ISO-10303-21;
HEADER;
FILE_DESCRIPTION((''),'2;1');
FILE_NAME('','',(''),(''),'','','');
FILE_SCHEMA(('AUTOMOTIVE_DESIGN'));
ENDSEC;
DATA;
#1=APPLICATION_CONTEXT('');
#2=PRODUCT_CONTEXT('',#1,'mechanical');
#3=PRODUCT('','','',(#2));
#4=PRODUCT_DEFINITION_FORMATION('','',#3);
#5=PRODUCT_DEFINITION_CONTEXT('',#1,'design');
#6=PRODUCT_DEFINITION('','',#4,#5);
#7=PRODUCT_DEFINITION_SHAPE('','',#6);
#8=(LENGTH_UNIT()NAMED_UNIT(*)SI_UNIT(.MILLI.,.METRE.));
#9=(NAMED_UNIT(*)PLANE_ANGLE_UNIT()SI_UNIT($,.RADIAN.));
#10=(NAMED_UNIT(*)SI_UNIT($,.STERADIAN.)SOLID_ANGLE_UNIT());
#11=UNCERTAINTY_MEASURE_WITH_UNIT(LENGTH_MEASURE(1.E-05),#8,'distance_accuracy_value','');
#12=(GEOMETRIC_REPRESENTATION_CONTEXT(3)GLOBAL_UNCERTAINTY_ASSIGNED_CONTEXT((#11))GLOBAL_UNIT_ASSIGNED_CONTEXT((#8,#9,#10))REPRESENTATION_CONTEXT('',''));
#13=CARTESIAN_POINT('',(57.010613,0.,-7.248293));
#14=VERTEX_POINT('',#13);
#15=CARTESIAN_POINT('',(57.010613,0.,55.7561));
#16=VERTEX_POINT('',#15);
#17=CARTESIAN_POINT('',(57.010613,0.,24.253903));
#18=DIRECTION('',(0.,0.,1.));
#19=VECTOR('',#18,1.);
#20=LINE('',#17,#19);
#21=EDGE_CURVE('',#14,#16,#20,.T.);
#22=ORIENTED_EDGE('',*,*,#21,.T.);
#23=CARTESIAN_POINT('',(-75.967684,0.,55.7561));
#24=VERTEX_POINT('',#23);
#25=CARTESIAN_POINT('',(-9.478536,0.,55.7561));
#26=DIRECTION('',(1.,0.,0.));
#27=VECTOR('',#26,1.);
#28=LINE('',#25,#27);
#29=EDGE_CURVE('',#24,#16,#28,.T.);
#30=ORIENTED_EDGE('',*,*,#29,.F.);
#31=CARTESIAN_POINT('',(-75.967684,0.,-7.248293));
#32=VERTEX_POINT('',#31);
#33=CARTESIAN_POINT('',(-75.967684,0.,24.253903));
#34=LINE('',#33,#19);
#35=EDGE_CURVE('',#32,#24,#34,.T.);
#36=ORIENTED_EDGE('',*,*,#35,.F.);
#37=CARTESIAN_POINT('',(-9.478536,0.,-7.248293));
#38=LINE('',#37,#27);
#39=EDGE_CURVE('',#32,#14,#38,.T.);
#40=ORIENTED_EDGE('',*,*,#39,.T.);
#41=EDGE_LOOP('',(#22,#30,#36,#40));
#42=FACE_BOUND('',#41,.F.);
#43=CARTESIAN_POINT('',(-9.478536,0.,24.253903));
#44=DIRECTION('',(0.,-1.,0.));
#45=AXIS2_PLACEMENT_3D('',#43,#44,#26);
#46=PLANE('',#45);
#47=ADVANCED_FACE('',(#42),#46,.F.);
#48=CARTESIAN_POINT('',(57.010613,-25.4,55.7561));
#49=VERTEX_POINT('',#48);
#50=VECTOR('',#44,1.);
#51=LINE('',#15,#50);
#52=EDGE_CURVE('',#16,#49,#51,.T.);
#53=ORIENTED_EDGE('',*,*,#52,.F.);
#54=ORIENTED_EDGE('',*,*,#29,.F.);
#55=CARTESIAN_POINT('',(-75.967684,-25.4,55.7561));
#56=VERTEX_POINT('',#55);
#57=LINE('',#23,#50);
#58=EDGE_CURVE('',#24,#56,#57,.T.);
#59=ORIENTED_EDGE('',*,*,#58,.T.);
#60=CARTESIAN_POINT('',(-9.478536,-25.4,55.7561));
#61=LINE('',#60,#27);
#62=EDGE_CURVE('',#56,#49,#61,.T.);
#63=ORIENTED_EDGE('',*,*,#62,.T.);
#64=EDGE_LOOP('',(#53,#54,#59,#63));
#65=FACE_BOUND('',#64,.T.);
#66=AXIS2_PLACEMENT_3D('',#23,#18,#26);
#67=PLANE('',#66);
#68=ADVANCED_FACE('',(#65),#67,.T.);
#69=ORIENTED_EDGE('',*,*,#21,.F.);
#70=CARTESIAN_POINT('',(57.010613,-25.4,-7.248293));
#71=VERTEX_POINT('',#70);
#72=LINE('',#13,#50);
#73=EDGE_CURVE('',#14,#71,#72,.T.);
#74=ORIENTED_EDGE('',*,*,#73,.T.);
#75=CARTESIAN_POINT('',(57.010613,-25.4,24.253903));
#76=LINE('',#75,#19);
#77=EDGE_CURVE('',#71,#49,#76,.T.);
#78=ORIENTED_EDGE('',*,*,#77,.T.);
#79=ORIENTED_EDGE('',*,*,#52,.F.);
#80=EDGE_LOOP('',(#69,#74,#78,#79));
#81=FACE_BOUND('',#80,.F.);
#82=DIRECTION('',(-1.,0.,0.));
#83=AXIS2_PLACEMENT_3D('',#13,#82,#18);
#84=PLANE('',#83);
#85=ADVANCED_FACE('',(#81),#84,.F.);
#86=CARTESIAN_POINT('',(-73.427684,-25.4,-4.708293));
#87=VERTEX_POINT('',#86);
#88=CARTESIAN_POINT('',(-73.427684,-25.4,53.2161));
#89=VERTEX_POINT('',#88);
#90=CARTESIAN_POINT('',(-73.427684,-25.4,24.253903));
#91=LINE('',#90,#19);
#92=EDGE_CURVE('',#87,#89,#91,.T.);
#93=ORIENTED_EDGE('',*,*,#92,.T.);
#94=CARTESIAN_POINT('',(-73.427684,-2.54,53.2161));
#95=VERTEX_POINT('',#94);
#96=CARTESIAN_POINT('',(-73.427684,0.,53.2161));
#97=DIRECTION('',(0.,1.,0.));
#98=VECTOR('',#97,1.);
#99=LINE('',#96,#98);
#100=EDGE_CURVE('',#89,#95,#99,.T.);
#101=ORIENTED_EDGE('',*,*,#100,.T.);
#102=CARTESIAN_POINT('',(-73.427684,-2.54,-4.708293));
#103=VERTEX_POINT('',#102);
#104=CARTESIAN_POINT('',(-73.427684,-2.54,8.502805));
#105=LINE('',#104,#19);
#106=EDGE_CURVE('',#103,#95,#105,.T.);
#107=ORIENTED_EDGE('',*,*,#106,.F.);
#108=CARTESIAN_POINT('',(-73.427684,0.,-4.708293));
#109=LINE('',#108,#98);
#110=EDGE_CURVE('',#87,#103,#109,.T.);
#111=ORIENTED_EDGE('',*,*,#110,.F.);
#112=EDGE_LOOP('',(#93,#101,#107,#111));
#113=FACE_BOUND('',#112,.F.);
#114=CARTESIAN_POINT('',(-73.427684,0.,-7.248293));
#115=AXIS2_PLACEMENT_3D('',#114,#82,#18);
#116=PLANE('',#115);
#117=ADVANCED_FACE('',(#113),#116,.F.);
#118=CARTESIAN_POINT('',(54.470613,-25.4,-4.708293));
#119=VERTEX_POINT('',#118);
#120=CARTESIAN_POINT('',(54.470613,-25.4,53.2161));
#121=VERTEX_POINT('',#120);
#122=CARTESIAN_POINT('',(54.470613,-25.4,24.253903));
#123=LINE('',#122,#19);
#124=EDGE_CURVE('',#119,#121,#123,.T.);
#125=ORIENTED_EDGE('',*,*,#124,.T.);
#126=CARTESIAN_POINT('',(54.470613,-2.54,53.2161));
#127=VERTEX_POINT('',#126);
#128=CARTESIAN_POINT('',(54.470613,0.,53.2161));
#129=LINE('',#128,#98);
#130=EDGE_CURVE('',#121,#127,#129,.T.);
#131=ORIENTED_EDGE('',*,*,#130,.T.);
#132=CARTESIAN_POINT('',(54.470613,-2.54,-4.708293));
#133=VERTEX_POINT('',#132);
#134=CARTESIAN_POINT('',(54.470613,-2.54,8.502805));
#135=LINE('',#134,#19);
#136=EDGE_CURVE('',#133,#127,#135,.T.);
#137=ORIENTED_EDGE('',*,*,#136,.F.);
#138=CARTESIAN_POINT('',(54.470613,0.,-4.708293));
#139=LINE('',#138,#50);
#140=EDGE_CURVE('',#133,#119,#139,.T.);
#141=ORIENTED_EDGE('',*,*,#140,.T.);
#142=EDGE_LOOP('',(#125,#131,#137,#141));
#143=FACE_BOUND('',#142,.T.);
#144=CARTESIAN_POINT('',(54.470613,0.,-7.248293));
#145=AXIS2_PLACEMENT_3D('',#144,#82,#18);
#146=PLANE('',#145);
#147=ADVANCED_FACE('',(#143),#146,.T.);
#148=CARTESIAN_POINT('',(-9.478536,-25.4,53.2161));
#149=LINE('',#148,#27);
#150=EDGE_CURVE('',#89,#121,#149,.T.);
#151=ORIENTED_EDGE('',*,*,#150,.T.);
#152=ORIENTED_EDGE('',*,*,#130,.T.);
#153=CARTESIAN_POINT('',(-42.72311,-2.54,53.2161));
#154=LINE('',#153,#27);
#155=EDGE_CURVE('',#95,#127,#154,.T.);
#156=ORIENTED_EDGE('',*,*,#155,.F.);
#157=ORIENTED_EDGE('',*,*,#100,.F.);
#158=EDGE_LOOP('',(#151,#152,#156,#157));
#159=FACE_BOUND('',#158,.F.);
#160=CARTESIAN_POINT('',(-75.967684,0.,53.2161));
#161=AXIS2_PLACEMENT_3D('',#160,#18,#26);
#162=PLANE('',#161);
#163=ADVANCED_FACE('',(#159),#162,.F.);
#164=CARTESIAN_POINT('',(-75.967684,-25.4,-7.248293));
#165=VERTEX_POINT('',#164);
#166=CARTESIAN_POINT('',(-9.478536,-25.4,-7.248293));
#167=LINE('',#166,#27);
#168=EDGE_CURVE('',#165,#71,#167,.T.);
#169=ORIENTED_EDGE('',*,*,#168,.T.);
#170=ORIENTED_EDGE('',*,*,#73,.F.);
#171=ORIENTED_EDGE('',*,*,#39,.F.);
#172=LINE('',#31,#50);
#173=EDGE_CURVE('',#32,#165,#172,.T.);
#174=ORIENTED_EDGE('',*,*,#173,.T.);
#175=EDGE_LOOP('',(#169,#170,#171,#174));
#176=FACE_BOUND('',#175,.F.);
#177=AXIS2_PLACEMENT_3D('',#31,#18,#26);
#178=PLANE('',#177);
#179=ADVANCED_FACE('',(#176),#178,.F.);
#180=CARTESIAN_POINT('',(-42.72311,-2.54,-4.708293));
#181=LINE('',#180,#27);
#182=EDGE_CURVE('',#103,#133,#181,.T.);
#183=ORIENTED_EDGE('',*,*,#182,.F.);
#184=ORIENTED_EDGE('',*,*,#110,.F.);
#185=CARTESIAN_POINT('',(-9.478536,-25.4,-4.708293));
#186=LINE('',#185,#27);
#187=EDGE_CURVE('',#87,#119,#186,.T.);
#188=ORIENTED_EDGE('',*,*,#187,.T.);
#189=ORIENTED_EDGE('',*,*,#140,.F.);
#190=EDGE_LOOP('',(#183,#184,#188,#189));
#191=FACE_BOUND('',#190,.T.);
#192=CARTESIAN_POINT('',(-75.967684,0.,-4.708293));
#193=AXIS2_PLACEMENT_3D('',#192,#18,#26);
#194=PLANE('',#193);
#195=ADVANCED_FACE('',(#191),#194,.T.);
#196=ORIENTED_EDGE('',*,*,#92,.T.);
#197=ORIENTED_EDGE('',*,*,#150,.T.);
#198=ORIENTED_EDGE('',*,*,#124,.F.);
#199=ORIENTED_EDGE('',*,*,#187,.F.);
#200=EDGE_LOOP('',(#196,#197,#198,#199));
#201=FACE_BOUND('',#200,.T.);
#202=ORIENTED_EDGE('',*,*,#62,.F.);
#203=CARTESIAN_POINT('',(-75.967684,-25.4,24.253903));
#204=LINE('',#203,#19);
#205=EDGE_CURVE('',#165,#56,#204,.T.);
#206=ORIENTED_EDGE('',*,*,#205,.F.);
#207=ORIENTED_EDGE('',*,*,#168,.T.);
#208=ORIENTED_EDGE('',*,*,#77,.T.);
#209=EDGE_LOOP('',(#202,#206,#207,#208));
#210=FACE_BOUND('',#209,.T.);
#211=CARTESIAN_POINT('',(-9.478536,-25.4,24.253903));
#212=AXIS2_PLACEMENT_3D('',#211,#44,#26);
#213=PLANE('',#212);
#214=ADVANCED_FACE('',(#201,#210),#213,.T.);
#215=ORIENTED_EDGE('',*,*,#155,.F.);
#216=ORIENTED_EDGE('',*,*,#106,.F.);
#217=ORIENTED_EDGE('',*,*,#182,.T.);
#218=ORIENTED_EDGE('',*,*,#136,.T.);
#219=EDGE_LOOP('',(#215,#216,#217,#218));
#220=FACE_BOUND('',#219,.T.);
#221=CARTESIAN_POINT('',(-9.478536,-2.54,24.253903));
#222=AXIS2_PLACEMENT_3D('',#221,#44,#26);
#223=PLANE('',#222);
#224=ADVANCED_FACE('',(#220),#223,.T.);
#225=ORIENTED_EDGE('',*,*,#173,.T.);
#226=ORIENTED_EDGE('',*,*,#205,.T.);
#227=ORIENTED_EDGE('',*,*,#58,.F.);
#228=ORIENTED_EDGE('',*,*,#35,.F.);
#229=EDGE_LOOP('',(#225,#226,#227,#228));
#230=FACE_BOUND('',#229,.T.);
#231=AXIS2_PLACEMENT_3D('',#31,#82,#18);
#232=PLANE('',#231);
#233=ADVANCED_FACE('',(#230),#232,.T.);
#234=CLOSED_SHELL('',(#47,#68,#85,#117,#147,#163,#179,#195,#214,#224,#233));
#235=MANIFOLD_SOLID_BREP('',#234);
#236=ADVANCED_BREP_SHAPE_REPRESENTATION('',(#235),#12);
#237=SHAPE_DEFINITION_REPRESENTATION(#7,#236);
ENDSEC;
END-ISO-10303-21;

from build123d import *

# Parameters (mm, degrees)
F0_W     = 132.97829777
F0_H     = 63.0043921992
F1_DEPTH = 25.4
F2_T     = -2.54


# Not quite as in the source:
# - a feature of the source that left no trace in its solid (it failed there, or was rolled back) is left out


with BuildPart() as f1:
    # F0 (on Front) → F1 (new body)
    with BuildSketch(Plane.XZ):
        with Locations((-9.4785355031, 24.2539034225)):
            Rectangle(F0_W, F0_H)
    extrude(amount=F1_DEPTH)

    # F2
    f2_openings = [f1.faces().sort_by_distance(p)[0] for p in [
        (-9.478536, -25.4, 24.253903),
    ]]
    offset(amount=F2_T, openings=f2_openings)


solid = f1.part
